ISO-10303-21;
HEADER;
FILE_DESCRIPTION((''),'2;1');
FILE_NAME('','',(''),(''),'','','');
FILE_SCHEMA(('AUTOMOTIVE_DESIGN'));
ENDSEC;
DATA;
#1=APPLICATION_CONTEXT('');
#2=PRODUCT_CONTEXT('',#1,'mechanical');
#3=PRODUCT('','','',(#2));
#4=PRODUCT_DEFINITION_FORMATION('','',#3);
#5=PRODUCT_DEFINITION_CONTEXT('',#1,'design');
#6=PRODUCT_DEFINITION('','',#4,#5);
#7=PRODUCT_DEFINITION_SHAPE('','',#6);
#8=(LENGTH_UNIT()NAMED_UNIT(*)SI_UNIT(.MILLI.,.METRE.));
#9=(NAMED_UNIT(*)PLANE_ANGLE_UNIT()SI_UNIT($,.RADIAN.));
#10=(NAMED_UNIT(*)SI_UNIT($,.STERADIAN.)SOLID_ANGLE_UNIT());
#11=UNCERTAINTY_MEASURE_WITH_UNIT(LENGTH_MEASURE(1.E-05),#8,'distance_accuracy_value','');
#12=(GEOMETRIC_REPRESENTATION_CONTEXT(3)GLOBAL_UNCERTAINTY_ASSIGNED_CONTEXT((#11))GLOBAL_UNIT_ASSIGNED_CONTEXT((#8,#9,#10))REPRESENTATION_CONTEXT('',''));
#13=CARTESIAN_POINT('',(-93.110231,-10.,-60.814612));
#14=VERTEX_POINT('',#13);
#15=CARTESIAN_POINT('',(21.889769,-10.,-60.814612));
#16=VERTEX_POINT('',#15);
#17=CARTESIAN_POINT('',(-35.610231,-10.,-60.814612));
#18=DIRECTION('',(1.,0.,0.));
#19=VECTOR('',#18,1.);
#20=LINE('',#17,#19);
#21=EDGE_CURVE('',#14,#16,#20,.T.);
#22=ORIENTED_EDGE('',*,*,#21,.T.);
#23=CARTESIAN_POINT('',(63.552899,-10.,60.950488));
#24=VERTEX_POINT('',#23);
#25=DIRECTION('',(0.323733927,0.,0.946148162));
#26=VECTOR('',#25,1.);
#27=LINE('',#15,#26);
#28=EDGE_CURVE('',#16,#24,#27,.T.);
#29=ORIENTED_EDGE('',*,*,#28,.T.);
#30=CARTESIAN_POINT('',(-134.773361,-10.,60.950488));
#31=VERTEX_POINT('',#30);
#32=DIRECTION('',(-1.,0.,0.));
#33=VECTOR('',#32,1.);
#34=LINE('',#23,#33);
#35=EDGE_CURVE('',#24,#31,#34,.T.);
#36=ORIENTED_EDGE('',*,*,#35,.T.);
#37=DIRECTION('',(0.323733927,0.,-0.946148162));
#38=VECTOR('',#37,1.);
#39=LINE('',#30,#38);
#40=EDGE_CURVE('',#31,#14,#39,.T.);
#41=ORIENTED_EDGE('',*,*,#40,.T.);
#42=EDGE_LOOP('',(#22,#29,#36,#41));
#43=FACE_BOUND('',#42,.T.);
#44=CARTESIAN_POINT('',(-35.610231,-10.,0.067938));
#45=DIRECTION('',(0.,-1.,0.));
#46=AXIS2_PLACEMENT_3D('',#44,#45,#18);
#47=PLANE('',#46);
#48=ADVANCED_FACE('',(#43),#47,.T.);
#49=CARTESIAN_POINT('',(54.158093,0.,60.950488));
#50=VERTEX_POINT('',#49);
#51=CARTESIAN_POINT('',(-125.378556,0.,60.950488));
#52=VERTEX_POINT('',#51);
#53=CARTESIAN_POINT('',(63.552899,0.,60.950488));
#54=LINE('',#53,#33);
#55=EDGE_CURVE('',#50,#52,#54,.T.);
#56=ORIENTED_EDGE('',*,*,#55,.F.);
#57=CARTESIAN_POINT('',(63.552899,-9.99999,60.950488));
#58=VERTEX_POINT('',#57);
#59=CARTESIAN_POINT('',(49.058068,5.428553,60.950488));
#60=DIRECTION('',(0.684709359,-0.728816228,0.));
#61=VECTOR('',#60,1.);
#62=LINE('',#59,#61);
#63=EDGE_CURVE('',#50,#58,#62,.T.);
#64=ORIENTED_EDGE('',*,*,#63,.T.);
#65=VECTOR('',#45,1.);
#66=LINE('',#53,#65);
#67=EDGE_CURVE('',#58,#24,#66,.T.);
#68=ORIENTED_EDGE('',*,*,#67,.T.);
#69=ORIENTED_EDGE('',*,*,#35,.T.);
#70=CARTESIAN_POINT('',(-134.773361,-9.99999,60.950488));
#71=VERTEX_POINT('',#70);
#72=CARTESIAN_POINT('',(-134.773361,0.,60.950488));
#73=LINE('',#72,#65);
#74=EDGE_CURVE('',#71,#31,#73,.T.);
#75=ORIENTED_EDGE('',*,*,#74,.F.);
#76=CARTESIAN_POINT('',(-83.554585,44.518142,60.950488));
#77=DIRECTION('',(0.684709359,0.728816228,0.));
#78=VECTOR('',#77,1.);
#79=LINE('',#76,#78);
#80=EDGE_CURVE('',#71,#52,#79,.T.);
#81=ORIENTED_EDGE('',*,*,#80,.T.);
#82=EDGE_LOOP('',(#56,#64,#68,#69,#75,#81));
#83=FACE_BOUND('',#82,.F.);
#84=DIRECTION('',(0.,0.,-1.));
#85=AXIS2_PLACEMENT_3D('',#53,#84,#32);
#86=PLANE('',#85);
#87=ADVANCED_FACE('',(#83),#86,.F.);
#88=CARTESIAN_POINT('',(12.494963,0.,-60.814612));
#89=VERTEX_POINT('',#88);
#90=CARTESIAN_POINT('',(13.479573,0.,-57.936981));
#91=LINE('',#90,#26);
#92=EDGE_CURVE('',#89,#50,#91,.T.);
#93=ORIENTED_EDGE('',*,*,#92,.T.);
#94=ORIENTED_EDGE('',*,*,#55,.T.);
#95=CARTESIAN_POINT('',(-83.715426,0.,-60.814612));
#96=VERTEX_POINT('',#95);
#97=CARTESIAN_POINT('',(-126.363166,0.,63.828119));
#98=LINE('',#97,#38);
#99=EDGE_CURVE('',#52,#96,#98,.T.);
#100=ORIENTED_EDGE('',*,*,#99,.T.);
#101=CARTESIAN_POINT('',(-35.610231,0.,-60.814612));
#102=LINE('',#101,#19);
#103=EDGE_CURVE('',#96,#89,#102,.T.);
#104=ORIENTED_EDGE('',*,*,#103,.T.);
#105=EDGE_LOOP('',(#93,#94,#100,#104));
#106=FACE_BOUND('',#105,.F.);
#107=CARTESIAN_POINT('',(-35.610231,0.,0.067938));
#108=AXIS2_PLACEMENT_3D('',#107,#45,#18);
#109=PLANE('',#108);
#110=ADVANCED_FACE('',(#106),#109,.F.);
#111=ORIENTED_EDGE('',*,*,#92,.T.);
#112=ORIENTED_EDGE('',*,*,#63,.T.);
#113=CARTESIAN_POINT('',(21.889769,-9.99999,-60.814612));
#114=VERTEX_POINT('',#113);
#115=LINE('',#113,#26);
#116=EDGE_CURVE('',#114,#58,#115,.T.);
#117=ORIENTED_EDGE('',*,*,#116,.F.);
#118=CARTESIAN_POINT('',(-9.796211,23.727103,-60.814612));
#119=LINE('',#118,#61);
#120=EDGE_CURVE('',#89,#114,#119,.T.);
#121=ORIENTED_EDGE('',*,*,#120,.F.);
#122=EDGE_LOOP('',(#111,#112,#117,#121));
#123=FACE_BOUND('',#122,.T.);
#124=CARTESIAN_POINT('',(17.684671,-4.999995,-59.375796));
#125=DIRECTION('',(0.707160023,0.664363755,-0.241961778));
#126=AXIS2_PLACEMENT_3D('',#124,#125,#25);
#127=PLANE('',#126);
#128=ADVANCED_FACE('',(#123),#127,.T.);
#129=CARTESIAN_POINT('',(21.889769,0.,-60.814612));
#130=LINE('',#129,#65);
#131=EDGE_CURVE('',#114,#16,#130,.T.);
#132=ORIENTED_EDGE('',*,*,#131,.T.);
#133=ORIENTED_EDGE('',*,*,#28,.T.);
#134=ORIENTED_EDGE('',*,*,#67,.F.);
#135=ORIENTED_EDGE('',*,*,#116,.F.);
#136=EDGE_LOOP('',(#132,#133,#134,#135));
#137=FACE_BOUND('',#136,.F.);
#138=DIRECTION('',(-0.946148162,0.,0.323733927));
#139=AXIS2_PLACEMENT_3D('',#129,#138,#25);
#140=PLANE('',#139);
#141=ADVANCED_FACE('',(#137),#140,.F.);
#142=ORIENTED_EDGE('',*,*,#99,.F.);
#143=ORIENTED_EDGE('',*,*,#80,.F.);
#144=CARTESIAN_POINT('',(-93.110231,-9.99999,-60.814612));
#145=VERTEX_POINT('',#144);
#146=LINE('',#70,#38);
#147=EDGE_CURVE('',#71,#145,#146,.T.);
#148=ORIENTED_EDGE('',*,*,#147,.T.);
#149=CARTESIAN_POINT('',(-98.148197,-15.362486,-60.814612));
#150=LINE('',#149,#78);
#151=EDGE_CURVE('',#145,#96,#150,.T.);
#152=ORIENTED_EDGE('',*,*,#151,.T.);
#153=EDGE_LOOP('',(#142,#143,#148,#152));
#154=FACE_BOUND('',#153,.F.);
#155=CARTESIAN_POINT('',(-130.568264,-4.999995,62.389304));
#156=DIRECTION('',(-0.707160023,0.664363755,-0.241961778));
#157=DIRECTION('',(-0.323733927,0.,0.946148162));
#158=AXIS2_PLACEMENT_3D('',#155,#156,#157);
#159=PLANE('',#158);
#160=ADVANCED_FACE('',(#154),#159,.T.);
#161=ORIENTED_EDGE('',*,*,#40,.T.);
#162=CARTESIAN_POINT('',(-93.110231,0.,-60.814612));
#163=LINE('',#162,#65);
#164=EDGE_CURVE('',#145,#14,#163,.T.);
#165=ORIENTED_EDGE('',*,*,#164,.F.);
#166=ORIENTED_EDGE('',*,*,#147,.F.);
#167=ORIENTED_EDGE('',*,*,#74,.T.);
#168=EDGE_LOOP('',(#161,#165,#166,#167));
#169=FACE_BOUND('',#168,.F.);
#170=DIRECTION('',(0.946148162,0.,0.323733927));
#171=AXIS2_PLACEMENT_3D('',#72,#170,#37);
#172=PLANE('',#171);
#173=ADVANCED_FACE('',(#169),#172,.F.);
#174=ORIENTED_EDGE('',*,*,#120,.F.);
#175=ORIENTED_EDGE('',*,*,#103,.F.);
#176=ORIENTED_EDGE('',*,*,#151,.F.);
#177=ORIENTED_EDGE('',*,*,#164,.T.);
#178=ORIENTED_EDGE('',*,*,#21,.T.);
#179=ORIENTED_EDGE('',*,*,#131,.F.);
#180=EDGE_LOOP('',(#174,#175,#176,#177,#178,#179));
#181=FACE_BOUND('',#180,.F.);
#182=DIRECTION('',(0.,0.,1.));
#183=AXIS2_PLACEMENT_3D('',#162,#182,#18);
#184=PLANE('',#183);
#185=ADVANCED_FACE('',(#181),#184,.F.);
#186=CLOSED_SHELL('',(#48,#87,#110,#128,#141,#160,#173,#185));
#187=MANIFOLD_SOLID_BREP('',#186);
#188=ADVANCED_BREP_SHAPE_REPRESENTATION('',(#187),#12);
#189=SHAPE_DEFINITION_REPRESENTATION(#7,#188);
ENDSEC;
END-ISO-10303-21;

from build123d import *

# Parameters (mm, degrees)
F0_W     = 115
F0_H     = 121.7650999273
F1_DEPTH = 10
F2_SIZE2 = 8.888878
F2_SIZE  = 9.99999
F3_SIZE2 = 9.99999
F3_SIZE  = 8.888878


# Not quite as in the source:
# - a fillet or chamfer is up to 0.001 mm smaller than in the source, because OpenCascade refuses the exact size


with BuildPart() as f1:
    # F0 (on Front) → F1 (new body)
    with BuildSketch(Plane.XZ):
        with Locations((-35.6102311611, 0.0679380756)):
            Rectangle(F0_W, F0_H)
        Polygon((-93.1102311611, -60.814611888), (-93.1102311611, 60.9504880392), (-134.7733613184, 60.9504880392), align=None)
        Polygon((63.5528989962, 60.9504880392), (21.8897688389, 60.9504880392), (21.8897688389, -60.814611888), align=None)
    extrude(amount=F1_DEPTH)

    # F2 (size 10 and 8.888888 in the source; OpenCascade refuses exactly that, so slightly less here)
    f2_edges = [f1.edges().sort_by_distance(p)[0] for p in [
        (-113.941796, 0, 0.067938),
    ]]
    f2_side = f1.faces().sort_by_distance((-113.941796, -5, 0.067938))[0]
    chamfer(f2_edges, length=F2_SIZE, length2=F2_SIZE2, reference=f2_side)

    # F3 (size 8.888888 and 10 in the source; OpenCascade refuses exactly that, so slightly less here)
    f3_edges = [f1.edges().sort_by_distance(p)[0] for p in [
        (42.721334, 0, 0.067938),
    ]]
    f3_side = f1.faces().sort_by_distance((-30.912828, 0, 5.809289))[0]
    chamfer(f3_edges, length=F3_SIZE, length2=F3_SIZE2, reference=f3_side)


solid = f1.part
